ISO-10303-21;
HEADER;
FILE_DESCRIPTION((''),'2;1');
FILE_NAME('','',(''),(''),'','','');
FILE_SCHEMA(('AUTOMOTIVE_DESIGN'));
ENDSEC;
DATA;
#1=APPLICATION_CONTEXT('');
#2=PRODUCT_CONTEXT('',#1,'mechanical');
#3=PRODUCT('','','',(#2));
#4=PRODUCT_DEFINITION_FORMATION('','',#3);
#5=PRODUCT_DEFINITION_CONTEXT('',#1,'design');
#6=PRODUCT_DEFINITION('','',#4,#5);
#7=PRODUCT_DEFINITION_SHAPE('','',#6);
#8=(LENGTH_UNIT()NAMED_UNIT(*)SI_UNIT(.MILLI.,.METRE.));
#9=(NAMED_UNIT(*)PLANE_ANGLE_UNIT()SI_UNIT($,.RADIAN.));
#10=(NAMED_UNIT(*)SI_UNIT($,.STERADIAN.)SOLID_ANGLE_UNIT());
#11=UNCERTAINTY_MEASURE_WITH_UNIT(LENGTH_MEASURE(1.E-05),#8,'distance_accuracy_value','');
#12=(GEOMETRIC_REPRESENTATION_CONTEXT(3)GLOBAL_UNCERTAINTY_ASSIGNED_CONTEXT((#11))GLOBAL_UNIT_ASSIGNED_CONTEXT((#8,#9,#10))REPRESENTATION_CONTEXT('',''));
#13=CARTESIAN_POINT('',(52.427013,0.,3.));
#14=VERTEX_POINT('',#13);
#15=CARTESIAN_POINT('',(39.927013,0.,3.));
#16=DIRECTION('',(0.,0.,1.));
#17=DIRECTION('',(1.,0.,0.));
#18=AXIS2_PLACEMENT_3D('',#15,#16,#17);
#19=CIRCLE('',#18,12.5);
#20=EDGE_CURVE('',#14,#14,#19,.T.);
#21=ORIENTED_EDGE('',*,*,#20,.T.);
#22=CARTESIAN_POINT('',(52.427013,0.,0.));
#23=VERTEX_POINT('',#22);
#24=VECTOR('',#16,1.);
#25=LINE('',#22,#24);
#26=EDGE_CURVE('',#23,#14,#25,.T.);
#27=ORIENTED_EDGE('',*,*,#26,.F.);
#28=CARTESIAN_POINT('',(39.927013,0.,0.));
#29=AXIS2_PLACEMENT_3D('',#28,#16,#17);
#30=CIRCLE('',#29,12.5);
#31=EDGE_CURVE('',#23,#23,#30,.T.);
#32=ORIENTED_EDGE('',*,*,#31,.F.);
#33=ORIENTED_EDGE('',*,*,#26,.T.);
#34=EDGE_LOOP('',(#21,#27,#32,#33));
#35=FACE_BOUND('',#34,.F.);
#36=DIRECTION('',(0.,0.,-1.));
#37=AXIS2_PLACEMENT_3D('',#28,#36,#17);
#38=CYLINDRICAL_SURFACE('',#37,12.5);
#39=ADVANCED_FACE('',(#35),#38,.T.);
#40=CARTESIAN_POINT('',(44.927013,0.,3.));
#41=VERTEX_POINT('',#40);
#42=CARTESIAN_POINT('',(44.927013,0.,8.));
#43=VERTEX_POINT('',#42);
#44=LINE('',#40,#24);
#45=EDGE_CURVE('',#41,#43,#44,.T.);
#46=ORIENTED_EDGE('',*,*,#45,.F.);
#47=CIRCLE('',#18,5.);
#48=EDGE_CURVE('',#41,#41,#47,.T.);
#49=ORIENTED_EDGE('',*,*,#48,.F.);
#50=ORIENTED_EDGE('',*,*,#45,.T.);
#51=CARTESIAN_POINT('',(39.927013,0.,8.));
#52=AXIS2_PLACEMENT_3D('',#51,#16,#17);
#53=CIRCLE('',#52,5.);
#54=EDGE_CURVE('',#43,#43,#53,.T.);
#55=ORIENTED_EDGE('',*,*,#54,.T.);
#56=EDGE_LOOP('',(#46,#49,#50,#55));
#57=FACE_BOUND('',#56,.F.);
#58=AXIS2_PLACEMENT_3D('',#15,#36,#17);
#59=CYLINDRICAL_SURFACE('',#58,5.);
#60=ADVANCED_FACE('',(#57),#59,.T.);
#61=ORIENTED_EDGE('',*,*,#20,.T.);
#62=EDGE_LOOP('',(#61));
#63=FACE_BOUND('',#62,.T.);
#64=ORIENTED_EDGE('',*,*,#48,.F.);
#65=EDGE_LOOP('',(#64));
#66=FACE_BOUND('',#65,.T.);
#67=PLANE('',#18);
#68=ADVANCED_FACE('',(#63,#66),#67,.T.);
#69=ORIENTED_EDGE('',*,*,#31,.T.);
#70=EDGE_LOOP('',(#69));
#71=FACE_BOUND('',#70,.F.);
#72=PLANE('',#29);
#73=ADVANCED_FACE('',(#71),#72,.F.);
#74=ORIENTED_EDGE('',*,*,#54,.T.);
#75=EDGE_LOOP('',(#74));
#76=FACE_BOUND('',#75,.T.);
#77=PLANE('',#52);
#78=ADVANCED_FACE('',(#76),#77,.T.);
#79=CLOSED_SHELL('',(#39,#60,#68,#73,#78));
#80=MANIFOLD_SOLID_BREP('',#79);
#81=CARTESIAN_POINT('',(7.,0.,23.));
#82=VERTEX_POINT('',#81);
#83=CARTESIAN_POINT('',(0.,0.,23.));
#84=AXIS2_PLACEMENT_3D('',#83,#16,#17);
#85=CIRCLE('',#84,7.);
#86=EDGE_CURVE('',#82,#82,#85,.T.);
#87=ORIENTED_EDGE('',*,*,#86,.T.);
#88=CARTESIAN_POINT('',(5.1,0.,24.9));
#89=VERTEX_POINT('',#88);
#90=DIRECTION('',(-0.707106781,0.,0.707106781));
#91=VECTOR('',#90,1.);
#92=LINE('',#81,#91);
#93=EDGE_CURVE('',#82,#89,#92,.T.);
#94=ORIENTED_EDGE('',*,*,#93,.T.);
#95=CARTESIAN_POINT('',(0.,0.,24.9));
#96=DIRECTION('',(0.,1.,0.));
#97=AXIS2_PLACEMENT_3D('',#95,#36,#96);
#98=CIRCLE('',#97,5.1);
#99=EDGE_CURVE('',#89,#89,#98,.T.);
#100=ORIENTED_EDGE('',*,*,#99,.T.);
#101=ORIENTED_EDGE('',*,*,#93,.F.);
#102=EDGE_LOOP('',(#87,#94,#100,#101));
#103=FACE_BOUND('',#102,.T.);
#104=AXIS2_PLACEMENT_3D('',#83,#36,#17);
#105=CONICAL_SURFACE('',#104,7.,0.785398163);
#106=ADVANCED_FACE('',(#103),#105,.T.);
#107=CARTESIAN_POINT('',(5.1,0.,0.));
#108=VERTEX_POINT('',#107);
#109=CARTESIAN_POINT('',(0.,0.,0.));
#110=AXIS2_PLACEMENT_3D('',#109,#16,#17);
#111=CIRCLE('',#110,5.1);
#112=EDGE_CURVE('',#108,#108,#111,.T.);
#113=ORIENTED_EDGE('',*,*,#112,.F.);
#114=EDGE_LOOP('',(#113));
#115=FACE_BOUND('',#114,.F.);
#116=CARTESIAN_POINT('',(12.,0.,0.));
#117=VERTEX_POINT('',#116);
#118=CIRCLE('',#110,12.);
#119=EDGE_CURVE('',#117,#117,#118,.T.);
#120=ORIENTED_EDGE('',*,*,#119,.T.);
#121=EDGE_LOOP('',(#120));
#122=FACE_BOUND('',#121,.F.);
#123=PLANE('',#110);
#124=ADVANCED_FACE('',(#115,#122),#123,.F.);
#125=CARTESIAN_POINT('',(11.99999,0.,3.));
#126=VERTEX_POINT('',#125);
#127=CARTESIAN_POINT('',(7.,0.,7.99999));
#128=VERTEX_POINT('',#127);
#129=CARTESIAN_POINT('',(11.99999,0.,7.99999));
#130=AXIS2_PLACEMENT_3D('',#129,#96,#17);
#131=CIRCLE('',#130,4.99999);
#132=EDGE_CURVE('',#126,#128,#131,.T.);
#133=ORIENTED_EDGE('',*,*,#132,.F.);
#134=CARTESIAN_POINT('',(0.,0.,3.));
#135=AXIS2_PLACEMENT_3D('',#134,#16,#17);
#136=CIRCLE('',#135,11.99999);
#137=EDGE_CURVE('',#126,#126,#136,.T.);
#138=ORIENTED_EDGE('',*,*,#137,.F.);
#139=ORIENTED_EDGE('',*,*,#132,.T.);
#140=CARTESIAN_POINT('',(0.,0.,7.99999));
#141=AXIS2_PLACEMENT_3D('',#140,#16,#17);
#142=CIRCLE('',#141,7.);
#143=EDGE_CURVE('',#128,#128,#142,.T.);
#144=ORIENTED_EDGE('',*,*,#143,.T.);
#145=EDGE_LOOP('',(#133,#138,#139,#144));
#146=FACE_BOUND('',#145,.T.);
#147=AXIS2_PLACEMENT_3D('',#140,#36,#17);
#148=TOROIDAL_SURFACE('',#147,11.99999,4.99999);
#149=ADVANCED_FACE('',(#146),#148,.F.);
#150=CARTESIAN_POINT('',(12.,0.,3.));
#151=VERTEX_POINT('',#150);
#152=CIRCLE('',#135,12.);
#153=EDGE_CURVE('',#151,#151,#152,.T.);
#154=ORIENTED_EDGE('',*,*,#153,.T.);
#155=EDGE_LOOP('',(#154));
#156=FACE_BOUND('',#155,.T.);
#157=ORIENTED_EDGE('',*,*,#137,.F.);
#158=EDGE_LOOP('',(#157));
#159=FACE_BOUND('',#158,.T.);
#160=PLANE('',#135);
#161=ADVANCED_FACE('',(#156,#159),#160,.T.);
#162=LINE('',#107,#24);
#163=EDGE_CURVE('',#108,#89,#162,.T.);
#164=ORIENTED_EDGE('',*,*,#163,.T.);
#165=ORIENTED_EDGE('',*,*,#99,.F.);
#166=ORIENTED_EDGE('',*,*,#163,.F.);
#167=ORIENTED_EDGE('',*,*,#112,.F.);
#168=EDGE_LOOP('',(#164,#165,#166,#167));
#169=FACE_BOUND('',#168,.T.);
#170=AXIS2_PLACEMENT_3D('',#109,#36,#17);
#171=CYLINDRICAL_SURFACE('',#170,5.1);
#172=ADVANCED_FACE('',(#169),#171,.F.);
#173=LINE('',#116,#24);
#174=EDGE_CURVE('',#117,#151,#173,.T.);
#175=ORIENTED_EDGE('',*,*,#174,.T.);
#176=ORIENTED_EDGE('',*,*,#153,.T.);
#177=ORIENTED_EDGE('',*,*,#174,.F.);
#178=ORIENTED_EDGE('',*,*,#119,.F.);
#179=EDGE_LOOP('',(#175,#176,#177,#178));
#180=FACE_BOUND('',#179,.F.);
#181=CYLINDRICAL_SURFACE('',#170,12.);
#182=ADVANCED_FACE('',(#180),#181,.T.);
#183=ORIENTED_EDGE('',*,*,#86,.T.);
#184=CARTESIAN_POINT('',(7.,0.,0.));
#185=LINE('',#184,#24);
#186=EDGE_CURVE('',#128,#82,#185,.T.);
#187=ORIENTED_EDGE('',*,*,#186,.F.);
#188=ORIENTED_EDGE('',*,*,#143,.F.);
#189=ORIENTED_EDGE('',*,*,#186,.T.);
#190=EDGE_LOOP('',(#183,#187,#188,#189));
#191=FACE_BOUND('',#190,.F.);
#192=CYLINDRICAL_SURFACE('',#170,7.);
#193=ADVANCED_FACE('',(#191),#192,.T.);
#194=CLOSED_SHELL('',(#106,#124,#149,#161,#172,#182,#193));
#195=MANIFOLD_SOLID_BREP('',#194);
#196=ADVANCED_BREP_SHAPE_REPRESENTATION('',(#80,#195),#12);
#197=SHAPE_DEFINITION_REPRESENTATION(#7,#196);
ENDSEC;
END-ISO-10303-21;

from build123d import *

# Parameters (mm, degrees)
F0_R     = 7
F0_R_2   = 5.1
F1_DEPTH = 25
F0_R_3   = 12
F2_DEPTH = 3
F3_R     = 4.99999
F5_R     = 12.5
F6_DEPTH = 3
F7_R     = 5
F8_DEPTH = 5


# Not quite as in the source:
# - a fillet or chamfer that OpenCascade refuses, or shapes differently, is made with other operations: its cross-section is extruded or revolved along the edge and cut away or added
# - a fillet or chamfer is up to 0.001 mm smaller than in the source, because OpenCascade refuses the exact size


with BuildPart() as f1:
    # F0 (on Top) → F1 (new body)
    with BuildSketch(Plane.XY):
        Circle(F0_R)
        Circle(F0_R_2, mode=Mode.SUBTRACT)
    extrude(amount=F1_DEPTH)

    # F0 (on Top) → F2 (join)
    with BuildSketch(Plane.XY):
        Circle(F0_R_3)
        Circle(F0_R, mode=Mode.SUBTRACT)
    extrude(amount=F2_DEPTH)

    # F3 (radius 5 in the source; OpenCascade refuses exactly that, so slightly less here)
    f3_edges = [f1.edges().sort_by_distance(p)[0] for p in [
        (-7, 0, 3),
    ]]
    fillet(f3_edges, radius=F3_R)

    # F4: chamfer of 2 on 1 edges, made by hand

    # F4_s1 → F4_t2 (revolve, cut)
    with BuildSketch(Plane.XZ):
        Polygon((7, 23), (5, 25), (7, 25), align=None)
    revolve(axis=Axis((0, 0, 25), (0, 0, 1)), mode=Mode.SUBTRACT)


with BuildPart() as f6:
    # F5 (on Top) → F6 (new body)
    with BuildSketch(Plane.XY):
        with Locations((39.9270130853, 0)):
            Circle(F5_R)
    extrude(amount=F6_DEPTH)

    # F7 (on face) → F8 (join)
    with BuildSketch(Plane.XY.offset(3)):
        with Locations((39.9270130853, 0)):
            Circle(F7_R)
    extrude(amount=F8_DEPTH)


solid = Compound([f1.part, f6.part])
